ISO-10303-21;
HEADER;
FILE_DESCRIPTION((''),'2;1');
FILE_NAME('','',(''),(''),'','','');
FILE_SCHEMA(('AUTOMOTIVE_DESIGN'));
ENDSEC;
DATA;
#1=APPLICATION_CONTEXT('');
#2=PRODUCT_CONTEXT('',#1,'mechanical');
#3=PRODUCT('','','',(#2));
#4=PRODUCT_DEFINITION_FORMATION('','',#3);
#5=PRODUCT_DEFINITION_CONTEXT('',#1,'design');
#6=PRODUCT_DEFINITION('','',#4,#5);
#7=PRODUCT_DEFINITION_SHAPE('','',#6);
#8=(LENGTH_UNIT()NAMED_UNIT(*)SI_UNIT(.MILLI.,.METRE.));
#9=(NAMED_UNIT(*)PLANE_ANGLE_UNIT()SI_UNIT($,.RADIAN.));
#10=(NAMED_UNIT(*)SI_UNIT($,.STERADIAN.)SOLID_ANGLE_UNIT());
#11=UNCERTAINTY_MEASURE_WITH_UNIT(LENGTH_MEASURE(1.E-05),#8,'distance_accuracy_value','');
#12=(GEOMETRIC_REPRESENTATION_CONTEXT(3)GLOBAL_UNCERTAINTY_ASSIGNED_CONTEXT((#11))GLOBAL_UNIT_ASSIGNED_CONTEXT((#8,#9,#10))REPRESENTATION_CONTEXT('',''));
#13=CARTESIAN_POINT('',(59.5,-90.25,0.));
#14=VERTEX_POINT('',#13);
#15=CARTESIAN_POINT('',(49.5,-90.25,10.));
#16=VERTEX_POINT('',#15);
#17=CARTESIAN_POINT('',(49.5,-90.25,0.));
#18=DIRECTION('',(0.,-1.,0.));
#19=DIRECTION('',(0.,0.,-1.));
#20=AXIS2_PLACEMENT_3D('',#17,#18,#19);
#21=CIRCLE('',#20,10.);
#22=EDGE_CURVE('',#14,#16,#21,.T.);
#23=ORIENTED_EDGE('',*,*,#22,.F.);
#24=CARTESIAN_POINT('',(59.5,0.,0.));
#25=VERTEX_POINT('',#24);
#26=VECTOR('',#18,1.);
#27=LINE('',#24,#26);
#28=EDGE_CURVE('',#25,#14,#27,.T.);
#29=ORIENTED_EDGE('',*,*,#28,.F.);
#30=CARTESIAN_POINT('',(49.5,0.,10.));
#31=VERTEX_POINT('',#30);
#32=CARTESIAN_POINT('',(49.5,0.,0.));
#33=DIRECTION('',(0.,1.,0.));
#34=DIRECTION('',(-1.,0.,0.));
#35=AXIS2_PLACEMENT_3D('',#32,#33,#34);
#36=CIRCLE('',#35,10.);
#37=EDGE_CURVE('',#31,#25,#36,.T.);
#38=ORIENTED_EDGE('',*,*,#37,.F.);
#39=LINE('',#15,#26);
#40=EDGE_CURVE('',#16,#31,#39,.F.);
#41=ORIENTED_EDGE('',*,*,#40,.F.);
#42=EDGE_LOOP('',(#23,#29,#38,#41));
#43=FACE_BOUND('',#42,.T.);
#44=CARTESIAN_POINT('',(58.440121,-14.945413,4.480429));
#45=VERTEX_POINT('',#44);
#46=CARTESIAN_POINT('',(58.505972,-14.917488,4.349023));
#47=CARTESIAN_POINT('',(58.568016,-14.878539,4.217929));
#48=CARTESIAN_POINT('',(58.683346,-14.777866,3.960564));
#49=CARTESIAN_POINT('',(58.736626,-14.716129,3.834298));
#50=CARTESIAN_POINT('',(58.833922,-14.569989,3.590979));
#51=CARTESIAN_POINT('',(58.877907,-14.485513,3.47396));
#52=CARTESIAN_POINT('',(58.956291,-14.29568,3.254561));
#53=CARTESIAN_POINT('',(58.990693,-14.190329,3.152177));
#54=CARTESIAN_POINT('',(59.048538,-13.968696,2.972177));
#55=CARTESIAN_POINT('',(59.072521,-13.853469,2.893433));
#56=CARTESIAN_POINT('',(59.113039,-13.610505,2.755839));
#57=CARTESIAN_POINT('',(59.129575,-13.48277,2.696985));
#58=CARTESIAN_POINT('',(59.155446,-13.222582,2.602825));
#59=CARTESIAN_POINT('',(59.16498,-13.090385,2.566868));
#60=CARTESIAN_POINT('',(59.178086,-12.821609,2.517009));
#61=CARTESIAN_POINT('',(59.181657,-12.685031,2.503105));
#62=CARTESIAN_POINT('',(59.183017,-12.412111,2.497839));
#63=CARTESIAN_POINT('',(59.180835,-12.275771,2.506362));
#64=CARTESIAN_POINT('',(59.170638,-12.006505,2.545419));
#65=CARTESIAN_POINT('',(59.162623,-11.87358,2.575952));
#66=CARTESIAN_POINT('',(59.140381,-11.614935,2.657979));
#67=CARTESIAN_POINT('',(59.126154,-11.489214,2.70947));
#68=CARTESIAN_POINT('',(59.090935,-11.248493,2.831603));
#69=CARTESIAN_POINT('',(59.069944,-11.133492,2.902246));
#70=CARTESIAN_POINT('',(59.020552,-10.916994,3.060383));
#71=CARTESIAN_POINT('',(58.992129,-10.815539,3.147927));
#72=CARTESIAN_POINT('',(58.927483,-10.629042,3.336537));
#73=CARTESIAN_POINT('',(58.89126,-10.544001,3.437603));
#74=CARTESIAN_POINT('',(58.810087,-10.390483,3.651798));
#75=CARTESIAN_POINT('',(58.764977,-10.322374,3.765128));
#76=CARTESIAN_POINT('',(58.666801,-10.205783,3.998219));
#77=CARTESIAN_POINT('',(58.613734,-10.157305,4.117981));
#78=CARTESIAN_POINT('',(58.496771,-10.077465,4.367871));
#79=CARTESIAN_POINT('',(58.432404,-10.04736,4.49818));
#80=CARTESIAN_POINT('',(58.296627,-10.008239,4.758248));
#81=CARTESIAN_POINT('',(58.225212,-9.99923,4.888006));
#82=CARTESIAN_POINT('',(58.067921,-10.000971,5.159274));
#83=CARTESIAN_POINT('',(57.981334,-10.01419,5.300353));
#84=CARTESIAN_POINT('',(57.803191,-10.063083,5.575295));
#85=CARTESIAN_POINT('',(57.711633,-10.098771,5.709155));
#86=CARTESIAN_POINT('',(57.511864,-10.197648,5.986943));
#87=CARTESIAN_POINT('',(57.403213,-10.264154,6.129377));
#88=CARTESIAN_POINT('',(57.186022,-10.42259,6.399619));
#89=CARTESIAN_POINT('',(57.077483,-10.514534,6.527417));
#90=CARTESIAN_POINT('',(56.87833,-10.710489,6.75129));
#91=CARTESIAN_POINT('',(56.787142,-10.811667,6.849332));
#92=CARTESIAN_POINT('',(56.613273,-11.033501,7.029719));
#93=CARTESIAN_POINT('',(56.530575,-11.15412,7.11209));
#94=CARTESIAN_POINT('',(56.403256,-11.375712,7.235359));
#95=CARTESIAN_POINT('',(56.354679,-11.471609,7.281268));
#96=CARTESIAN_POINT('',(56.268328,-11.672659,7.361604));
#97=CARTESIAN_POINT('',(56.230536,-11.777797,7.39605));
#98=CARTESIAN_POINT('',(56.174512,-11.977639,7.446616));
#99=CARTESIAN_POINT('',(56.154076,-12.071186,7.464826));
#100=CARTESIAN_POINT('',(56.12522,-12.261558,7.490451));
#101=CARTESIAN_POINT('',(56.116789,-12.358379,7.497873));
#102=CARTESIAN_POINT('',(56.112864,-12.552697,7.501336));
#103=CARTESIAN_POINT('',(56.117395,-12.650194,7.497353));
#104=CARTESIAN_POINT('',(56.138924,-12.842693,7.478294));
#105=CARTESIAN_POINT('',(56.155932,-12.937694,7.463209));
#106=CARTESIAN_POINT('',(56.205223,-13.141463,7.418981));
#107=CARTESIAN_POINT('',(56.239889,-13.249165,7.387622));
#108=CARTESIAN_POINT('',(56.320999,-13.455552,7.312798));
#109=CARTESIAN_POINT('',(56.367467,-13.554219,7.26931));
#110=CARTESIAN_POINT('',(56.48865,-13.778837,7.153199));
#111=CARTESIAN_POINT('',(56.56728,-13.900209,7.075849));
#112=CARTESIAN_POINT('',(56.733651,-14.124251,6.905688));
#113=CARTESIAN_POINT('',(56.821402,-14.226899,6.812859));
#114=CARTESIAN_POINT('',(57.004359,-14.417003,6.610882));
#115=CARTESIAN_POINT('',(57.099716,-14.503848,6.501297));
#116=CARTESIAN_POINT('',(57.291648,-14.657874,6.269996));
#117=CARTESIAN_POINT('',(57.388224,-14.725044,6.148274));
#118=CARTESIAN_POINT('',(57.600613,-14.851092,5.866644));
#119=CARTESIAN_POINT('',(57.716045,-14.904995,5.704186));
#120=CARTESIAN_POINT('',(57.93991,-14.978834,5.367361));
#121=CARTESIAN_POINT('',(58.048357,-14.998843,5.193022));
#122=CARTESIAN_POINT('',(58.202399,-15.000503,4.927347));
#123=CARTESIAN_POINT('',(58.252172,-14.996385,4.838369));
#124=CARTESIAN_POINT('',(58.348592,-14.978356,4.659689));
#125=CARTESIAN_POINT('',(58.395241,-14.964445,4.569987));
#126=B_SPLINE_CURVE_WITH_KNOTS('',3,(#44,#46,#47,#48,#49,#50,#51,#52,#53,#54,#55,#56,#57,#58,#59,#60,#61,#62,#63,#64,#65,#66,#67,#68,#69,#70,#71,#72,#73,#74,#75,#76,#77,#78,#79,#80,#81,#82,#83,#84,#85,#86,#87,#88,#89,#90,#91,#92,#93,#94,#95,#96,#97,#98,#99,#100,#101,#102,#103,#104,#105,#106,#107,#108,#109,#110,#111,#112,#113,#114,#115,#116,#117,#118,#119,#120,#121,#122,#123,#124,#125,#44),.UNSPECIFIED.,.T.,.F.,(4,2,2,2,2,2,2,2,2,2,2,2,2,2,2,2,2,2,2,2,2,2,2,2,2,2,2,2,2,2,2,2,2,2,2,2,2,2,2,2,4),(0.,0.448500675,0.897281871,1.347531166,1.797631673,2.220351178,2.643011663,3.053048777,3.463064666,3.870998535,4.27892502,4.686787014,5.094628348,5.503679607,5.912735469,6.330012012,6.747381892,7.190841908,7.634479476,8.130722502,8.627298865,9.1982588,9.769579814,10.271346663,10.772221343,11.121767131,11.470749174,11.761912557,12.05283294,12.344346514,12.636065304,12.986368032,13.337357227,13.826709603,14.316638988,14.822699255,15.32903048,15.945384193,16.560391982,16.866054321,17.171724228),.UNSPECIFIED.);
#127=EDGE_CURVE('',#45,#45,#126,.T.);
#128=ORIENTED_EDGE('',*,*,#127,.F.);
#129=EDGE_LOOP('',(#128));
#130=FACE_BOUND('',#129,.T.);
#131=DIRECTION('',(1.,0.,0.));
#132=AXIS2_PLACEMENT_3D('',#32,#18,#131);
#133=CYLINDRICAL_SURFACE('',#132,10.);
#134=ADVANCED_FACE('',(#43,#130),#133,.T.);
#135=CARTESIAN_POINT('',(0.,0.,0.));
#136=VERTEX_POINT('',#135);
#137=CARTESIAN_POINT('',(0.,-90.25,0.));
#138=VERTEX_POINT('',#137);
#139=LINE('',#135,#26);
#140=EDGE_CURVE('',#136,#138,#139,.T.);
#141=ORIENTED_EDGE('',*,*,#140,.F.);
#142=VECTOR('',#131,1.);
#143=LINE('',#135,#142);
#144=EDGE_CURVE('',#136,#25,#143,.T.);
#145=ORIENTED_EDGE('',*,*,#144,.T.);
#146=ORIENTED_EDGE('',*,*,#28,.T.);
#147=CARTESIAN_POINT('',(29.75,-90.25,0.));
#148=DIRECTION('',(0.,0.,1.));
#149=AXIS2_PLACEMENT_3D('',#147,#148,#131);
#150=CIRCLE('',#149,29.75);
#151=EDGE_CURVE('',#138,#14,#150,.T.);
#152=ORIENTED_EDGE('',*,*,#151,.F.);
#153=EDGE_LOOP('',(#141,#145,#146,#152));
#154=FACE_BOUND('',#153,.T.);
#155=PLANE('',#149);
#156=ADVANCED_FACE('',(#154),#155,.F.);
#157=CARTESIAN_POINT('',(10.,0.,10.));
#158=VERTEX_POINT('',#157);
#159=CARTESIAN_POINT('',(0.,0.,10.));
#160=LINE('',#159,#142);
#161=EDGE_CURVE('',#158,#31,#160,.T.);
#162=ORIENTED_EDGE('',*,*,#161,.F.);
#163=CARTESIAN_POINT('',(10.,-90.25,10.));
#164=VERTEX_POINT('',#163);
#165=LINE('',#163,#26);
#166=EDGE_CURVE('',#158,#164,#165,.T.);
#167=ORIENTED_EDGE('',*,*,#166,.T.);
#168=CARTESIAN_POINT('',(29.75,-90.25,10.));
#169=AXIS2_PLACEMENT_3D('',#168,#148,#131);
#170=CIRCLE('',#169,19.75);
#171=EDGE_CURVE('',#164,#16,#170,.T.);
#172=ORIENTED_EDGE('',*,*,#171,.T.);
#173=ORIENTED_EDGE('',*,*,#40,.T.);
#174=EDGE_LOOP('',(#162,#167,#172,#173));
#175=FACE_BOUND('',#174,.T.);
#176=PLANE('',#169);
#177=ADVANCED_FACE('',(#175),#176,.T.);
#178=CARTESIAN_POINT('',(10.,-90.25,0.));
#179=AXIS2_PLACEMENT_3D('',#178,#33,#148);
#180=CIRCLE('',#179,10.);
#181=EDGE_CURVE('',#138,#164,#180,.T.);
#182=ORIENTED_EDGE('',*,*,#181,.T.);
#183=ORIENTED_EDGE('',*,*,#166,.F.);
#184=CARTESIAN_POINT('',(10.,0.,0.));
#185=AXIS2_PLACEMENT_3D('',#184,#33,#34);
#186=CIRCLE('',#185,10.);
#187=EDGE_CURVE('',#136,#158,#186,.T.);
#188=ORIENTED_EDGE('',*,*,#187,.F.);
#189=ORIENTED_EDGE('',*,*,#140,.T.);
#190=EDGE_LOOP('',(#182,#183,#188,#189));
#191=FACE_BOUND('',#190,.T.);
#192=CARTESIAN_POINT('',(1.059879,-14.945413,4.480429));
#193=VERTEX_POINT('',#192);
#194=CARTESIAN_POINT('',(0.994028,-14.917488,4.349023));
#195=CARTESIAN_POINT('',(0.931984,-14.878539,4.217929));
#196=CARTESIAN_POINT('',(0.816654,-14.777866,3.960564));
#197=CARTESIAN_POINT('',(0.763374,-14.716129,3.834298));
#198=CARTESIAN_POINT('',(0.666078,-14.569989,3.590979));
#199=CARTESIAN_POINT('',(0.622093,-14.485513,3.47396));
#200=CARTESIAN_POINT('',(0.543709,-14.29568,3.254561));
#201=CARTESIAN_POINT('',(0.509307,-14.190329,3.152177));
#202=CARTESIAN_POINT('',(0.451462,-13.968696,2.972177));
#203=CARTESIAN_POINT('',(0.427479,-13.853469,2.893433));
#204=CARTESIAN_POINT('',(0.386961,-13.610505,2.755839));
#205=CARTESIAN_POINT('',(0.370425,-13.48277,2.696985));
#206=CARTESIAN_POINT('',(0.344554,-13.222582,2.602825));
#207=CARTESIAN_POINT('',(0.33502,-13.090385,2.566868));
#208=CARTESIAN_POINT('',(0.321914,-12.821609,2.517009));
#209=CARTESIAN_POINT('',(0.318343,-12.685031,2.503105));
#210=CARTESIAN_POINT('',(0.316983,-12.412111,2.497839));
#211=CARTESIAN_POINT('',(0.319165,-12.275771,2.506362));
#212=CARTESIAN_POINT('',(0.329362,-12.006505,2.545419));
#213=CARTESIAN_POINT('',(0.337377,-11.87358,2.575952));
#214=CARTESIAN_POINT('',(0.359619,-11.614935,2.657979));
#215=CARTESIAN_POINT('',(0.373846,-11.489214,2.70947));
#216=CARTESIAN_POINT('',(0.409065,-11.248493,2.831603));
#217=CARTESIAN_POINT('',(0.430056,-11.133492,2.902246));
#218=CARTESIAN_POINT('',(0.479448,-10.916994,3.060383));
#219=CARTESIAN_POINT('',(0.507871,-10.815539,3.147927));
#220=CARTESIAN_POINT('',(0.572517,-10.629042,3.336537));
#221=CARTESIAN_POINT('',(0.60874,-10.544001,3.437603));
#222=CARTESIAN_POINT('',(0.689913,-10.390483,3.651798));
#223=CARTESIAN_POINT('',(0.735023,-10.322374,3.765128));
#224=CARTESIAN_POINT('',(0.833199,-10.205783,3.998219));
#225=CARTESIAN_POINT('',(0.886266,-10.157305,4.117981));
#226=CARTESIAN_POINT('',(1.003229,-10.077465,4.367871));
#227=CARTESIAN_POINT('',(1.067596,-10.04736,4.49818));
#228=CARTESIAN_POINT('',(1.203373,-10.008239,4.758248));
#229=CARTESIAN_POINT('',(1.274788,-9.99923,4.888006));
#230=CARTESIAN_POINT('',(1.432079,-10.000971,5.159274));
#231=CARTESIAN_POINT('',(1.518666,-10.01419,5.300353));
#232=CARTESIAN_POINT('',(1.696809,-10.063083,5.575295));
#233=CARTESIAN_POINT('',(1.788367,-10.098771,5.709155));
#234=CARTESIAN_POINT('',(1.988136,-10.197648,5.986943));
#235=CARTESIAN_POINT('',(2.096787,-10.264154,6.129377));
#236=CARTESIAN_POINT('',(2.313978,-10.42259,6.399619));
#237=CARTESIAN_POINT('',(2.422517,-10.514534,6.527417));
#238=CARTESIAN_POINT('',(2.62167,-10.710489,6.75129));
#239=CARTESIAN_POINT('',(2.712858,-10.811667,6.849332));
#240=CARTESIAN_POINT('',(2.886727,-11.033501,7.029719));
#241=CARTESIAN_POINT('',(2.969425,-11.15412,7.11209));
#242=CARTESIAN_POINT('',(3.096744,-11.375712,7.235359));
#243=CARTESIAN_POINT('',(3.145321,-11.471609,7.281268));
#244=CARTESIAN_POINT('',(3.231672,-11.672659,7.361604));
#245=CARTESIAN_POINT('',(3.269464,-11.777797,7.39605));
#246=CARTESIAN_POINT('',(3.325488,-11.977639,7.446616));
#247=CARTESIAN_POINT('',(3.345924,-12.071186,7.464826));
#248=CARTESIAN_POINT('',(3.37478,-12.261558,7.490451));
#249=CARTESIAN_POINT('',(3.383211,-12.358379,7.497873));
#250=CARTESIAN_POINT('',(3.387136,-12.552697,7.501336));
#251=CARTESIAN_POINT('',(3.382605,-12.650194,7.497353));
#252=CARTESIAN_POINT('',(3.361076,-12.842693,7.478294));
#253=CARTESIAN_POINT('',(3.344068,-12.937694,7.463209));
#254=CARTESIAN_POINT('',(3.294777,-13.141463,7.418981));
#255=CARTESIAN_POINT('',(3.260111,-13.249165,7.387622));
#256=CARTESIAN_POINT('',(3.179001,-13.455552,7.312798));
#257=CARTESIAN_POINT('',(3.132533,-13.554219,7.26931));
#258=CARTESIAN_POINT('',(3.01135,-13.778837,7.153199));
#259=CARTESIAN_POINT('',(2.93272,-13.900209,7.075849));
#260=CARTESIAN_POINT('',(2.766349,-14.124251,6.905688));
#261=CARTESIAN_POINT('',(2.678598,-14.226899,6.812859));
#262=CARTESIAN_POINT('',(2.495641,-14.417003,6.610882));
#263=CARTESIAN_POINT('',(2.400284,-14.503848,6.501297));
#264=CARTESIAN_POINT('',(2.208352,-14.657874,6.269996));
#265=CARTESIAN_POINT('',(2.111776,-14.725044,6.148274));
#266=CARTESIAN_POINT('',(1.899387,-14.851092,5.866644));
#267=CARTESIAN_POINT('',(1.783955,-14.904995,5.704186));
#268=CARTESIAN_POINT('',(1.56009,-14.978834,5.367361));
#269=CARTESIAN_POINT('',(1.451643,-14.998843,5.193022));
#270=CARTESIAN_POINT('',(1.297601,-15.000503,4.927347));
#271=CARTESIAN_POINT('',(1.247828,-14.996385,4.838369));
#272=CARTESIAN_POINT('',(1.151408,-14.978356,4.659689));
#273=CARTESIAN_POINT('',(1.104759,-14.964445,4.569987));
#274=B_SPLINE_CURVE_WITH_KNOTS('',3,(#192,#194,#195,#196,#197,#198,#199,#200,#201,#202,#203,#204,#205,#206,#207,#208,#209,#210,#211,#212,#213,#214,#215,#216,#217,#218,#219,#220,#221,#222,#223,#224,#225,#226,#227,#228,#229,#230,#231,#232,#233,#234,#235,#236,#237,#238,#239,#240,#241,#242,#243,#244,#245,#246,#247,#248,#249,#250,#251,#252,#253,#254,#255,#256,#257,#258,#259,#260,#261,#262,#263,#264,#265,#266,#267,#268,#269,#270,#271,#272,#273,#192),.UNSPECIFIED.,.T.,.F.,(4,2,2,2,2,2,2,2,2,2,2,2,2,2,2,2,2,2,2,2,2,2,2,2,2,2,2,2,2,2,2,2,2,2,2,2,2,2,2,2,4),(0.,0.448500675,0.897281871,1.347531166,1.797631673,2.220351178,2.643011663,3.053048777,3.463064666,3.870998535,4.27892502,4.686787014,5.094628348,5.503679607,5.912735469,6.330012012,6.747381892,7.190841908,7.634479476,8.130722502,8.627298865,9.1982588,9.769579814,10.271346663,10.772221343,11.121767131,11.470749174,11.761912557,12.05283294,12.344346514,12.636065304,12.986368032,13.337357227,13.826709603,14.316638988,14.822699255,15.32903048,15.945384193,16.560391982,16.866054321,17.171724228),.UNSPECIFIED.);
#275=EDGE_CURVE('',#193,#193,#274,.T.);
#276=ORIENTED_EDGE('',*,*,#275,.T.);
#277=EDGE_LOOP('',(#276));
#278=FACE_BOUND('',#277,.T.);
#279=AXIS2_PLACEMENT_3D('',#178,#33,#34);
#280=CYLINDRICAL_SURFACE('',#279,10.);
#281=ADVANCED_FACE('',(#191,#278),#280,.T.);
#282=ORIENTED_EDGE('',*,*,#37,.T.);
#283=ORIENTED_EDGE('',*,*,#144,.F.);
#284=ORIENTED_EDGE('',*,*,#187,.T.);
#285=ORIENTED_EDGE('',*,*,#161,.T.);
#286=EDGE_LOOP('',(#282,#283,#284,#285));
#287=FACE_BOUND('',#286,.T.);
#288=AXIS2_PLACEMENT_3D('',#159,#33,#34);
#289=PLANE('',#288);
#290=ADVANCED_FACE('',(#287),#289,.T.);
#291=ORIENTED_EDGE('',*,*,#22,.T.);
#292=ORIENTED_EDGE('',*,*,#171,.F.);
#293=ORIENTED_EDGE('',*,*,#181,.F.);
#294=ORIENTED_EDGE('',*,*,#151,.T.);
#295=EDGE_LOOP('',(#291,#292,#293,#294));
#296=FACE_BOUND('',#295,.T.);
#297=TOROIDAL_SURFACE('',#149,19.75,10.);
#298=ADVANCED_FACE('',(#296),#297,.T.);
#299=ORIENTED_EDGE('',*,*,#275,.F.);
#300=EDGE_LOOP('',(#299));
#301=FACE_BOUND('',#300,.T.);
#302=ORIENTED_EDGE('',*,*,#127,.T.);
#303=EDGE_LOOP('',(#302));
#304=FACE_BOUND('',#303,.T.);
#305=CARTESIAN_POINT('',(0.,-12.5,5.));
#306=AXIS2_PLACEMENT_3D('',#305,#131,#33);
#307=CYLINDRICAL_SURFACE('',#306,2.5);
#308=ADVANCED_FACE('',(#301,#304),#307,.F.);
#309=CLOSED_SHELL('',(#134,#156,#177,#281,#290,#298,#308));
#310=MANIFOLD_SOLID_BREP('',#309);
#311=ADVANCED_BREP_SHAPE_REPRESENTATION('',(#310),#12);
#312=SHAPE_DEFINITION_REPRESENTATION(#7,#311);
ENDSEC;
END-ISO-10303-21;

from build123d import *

# Parameters (mm, degrees)
EXTRUDE_1_DEPTH     = 10
SKETCH_9_R          = 2.5
CUT_EXTRUDE_1_DEPTH = 59.5
FILLET_3_R          = 10


with BuildPart() as part:
    # Эскиз1 → Бобышка-Вытянуть1 (new body)
    with BuildSketch(Plane.XY):
        with BuildLine():
            Line((0, 0), (59.5, 0))
            Line((59.5, 0), (59.5, -90.25))
            ThreePointArc((59.5, -90.25), (29.75, -120), (0, -90.25))
            Line((0, -90.25), (0, 0))
        make_face()
    extrude(amount=EXTRUDE_1_DEPTH)

    # Эскиз9 → Вырез-Вытянуть1 (cut)
    with BuildSketch(Plane(origin=(59.5, 0, 0), x_dir=(0, 0, -1), z_dir=(1, 0, 0))):
        with Locations(Location((-5, -12.5, 0), (0, 0, 90))):
            Circle(SKETCH_9_R)
    extrude(amount=-CUT_EXTRUDE_1_DEPTH, mode=Mode.SUBTRACT)

    # Скругление3
    # the kernel refuses this fillet: 10 mm, written as the material it takes off along each edge
    with BuildSketch(Plane(origin=(0, -90.25, 10), x_dir=(0, 0, -1), z_dir=(0, 1, 0)), Plane(origin=(59.5, 25, 10), x_dir=(0, 0, -1), z_dir=(0, -1, 0))) as fillet_3_piece_1:
        with BuildLine():
            CenterArc((FILLET_3_R, -FILLET_3_R), FILLET_3_R, 90, 90)
            Line((0, -FILLET_3_R), (0, 0))
            Line((0, 0), (FILLET_3_R, 0))
        make_face()
    extrude(amount=115.25, mode=Mode.SUBTRACT)
    with BuildSketch(Plane(origin=(29.75, -90.25, 10), x_dir=(1, 0, 0), z_dir=(0, 1, 0))) as fillet_3_piece_2:
        with BuildLine():
            CenterArc((29.75 - FILLET_3_R, FILLET_3_R), FILLET_3_R, 270, 90)
            Line((29.75 - FILLET_3_R, 0), (29.75, 0))
            Line((29.75, 0), (29.75, FILLET_3_R))
        make_face()
    revolve(axis=Axis((29.75, -90.25, 10), (0, 0, -1)), revolution_arc=180, mode=Mode.SUBTRACT)


solid = part.part
